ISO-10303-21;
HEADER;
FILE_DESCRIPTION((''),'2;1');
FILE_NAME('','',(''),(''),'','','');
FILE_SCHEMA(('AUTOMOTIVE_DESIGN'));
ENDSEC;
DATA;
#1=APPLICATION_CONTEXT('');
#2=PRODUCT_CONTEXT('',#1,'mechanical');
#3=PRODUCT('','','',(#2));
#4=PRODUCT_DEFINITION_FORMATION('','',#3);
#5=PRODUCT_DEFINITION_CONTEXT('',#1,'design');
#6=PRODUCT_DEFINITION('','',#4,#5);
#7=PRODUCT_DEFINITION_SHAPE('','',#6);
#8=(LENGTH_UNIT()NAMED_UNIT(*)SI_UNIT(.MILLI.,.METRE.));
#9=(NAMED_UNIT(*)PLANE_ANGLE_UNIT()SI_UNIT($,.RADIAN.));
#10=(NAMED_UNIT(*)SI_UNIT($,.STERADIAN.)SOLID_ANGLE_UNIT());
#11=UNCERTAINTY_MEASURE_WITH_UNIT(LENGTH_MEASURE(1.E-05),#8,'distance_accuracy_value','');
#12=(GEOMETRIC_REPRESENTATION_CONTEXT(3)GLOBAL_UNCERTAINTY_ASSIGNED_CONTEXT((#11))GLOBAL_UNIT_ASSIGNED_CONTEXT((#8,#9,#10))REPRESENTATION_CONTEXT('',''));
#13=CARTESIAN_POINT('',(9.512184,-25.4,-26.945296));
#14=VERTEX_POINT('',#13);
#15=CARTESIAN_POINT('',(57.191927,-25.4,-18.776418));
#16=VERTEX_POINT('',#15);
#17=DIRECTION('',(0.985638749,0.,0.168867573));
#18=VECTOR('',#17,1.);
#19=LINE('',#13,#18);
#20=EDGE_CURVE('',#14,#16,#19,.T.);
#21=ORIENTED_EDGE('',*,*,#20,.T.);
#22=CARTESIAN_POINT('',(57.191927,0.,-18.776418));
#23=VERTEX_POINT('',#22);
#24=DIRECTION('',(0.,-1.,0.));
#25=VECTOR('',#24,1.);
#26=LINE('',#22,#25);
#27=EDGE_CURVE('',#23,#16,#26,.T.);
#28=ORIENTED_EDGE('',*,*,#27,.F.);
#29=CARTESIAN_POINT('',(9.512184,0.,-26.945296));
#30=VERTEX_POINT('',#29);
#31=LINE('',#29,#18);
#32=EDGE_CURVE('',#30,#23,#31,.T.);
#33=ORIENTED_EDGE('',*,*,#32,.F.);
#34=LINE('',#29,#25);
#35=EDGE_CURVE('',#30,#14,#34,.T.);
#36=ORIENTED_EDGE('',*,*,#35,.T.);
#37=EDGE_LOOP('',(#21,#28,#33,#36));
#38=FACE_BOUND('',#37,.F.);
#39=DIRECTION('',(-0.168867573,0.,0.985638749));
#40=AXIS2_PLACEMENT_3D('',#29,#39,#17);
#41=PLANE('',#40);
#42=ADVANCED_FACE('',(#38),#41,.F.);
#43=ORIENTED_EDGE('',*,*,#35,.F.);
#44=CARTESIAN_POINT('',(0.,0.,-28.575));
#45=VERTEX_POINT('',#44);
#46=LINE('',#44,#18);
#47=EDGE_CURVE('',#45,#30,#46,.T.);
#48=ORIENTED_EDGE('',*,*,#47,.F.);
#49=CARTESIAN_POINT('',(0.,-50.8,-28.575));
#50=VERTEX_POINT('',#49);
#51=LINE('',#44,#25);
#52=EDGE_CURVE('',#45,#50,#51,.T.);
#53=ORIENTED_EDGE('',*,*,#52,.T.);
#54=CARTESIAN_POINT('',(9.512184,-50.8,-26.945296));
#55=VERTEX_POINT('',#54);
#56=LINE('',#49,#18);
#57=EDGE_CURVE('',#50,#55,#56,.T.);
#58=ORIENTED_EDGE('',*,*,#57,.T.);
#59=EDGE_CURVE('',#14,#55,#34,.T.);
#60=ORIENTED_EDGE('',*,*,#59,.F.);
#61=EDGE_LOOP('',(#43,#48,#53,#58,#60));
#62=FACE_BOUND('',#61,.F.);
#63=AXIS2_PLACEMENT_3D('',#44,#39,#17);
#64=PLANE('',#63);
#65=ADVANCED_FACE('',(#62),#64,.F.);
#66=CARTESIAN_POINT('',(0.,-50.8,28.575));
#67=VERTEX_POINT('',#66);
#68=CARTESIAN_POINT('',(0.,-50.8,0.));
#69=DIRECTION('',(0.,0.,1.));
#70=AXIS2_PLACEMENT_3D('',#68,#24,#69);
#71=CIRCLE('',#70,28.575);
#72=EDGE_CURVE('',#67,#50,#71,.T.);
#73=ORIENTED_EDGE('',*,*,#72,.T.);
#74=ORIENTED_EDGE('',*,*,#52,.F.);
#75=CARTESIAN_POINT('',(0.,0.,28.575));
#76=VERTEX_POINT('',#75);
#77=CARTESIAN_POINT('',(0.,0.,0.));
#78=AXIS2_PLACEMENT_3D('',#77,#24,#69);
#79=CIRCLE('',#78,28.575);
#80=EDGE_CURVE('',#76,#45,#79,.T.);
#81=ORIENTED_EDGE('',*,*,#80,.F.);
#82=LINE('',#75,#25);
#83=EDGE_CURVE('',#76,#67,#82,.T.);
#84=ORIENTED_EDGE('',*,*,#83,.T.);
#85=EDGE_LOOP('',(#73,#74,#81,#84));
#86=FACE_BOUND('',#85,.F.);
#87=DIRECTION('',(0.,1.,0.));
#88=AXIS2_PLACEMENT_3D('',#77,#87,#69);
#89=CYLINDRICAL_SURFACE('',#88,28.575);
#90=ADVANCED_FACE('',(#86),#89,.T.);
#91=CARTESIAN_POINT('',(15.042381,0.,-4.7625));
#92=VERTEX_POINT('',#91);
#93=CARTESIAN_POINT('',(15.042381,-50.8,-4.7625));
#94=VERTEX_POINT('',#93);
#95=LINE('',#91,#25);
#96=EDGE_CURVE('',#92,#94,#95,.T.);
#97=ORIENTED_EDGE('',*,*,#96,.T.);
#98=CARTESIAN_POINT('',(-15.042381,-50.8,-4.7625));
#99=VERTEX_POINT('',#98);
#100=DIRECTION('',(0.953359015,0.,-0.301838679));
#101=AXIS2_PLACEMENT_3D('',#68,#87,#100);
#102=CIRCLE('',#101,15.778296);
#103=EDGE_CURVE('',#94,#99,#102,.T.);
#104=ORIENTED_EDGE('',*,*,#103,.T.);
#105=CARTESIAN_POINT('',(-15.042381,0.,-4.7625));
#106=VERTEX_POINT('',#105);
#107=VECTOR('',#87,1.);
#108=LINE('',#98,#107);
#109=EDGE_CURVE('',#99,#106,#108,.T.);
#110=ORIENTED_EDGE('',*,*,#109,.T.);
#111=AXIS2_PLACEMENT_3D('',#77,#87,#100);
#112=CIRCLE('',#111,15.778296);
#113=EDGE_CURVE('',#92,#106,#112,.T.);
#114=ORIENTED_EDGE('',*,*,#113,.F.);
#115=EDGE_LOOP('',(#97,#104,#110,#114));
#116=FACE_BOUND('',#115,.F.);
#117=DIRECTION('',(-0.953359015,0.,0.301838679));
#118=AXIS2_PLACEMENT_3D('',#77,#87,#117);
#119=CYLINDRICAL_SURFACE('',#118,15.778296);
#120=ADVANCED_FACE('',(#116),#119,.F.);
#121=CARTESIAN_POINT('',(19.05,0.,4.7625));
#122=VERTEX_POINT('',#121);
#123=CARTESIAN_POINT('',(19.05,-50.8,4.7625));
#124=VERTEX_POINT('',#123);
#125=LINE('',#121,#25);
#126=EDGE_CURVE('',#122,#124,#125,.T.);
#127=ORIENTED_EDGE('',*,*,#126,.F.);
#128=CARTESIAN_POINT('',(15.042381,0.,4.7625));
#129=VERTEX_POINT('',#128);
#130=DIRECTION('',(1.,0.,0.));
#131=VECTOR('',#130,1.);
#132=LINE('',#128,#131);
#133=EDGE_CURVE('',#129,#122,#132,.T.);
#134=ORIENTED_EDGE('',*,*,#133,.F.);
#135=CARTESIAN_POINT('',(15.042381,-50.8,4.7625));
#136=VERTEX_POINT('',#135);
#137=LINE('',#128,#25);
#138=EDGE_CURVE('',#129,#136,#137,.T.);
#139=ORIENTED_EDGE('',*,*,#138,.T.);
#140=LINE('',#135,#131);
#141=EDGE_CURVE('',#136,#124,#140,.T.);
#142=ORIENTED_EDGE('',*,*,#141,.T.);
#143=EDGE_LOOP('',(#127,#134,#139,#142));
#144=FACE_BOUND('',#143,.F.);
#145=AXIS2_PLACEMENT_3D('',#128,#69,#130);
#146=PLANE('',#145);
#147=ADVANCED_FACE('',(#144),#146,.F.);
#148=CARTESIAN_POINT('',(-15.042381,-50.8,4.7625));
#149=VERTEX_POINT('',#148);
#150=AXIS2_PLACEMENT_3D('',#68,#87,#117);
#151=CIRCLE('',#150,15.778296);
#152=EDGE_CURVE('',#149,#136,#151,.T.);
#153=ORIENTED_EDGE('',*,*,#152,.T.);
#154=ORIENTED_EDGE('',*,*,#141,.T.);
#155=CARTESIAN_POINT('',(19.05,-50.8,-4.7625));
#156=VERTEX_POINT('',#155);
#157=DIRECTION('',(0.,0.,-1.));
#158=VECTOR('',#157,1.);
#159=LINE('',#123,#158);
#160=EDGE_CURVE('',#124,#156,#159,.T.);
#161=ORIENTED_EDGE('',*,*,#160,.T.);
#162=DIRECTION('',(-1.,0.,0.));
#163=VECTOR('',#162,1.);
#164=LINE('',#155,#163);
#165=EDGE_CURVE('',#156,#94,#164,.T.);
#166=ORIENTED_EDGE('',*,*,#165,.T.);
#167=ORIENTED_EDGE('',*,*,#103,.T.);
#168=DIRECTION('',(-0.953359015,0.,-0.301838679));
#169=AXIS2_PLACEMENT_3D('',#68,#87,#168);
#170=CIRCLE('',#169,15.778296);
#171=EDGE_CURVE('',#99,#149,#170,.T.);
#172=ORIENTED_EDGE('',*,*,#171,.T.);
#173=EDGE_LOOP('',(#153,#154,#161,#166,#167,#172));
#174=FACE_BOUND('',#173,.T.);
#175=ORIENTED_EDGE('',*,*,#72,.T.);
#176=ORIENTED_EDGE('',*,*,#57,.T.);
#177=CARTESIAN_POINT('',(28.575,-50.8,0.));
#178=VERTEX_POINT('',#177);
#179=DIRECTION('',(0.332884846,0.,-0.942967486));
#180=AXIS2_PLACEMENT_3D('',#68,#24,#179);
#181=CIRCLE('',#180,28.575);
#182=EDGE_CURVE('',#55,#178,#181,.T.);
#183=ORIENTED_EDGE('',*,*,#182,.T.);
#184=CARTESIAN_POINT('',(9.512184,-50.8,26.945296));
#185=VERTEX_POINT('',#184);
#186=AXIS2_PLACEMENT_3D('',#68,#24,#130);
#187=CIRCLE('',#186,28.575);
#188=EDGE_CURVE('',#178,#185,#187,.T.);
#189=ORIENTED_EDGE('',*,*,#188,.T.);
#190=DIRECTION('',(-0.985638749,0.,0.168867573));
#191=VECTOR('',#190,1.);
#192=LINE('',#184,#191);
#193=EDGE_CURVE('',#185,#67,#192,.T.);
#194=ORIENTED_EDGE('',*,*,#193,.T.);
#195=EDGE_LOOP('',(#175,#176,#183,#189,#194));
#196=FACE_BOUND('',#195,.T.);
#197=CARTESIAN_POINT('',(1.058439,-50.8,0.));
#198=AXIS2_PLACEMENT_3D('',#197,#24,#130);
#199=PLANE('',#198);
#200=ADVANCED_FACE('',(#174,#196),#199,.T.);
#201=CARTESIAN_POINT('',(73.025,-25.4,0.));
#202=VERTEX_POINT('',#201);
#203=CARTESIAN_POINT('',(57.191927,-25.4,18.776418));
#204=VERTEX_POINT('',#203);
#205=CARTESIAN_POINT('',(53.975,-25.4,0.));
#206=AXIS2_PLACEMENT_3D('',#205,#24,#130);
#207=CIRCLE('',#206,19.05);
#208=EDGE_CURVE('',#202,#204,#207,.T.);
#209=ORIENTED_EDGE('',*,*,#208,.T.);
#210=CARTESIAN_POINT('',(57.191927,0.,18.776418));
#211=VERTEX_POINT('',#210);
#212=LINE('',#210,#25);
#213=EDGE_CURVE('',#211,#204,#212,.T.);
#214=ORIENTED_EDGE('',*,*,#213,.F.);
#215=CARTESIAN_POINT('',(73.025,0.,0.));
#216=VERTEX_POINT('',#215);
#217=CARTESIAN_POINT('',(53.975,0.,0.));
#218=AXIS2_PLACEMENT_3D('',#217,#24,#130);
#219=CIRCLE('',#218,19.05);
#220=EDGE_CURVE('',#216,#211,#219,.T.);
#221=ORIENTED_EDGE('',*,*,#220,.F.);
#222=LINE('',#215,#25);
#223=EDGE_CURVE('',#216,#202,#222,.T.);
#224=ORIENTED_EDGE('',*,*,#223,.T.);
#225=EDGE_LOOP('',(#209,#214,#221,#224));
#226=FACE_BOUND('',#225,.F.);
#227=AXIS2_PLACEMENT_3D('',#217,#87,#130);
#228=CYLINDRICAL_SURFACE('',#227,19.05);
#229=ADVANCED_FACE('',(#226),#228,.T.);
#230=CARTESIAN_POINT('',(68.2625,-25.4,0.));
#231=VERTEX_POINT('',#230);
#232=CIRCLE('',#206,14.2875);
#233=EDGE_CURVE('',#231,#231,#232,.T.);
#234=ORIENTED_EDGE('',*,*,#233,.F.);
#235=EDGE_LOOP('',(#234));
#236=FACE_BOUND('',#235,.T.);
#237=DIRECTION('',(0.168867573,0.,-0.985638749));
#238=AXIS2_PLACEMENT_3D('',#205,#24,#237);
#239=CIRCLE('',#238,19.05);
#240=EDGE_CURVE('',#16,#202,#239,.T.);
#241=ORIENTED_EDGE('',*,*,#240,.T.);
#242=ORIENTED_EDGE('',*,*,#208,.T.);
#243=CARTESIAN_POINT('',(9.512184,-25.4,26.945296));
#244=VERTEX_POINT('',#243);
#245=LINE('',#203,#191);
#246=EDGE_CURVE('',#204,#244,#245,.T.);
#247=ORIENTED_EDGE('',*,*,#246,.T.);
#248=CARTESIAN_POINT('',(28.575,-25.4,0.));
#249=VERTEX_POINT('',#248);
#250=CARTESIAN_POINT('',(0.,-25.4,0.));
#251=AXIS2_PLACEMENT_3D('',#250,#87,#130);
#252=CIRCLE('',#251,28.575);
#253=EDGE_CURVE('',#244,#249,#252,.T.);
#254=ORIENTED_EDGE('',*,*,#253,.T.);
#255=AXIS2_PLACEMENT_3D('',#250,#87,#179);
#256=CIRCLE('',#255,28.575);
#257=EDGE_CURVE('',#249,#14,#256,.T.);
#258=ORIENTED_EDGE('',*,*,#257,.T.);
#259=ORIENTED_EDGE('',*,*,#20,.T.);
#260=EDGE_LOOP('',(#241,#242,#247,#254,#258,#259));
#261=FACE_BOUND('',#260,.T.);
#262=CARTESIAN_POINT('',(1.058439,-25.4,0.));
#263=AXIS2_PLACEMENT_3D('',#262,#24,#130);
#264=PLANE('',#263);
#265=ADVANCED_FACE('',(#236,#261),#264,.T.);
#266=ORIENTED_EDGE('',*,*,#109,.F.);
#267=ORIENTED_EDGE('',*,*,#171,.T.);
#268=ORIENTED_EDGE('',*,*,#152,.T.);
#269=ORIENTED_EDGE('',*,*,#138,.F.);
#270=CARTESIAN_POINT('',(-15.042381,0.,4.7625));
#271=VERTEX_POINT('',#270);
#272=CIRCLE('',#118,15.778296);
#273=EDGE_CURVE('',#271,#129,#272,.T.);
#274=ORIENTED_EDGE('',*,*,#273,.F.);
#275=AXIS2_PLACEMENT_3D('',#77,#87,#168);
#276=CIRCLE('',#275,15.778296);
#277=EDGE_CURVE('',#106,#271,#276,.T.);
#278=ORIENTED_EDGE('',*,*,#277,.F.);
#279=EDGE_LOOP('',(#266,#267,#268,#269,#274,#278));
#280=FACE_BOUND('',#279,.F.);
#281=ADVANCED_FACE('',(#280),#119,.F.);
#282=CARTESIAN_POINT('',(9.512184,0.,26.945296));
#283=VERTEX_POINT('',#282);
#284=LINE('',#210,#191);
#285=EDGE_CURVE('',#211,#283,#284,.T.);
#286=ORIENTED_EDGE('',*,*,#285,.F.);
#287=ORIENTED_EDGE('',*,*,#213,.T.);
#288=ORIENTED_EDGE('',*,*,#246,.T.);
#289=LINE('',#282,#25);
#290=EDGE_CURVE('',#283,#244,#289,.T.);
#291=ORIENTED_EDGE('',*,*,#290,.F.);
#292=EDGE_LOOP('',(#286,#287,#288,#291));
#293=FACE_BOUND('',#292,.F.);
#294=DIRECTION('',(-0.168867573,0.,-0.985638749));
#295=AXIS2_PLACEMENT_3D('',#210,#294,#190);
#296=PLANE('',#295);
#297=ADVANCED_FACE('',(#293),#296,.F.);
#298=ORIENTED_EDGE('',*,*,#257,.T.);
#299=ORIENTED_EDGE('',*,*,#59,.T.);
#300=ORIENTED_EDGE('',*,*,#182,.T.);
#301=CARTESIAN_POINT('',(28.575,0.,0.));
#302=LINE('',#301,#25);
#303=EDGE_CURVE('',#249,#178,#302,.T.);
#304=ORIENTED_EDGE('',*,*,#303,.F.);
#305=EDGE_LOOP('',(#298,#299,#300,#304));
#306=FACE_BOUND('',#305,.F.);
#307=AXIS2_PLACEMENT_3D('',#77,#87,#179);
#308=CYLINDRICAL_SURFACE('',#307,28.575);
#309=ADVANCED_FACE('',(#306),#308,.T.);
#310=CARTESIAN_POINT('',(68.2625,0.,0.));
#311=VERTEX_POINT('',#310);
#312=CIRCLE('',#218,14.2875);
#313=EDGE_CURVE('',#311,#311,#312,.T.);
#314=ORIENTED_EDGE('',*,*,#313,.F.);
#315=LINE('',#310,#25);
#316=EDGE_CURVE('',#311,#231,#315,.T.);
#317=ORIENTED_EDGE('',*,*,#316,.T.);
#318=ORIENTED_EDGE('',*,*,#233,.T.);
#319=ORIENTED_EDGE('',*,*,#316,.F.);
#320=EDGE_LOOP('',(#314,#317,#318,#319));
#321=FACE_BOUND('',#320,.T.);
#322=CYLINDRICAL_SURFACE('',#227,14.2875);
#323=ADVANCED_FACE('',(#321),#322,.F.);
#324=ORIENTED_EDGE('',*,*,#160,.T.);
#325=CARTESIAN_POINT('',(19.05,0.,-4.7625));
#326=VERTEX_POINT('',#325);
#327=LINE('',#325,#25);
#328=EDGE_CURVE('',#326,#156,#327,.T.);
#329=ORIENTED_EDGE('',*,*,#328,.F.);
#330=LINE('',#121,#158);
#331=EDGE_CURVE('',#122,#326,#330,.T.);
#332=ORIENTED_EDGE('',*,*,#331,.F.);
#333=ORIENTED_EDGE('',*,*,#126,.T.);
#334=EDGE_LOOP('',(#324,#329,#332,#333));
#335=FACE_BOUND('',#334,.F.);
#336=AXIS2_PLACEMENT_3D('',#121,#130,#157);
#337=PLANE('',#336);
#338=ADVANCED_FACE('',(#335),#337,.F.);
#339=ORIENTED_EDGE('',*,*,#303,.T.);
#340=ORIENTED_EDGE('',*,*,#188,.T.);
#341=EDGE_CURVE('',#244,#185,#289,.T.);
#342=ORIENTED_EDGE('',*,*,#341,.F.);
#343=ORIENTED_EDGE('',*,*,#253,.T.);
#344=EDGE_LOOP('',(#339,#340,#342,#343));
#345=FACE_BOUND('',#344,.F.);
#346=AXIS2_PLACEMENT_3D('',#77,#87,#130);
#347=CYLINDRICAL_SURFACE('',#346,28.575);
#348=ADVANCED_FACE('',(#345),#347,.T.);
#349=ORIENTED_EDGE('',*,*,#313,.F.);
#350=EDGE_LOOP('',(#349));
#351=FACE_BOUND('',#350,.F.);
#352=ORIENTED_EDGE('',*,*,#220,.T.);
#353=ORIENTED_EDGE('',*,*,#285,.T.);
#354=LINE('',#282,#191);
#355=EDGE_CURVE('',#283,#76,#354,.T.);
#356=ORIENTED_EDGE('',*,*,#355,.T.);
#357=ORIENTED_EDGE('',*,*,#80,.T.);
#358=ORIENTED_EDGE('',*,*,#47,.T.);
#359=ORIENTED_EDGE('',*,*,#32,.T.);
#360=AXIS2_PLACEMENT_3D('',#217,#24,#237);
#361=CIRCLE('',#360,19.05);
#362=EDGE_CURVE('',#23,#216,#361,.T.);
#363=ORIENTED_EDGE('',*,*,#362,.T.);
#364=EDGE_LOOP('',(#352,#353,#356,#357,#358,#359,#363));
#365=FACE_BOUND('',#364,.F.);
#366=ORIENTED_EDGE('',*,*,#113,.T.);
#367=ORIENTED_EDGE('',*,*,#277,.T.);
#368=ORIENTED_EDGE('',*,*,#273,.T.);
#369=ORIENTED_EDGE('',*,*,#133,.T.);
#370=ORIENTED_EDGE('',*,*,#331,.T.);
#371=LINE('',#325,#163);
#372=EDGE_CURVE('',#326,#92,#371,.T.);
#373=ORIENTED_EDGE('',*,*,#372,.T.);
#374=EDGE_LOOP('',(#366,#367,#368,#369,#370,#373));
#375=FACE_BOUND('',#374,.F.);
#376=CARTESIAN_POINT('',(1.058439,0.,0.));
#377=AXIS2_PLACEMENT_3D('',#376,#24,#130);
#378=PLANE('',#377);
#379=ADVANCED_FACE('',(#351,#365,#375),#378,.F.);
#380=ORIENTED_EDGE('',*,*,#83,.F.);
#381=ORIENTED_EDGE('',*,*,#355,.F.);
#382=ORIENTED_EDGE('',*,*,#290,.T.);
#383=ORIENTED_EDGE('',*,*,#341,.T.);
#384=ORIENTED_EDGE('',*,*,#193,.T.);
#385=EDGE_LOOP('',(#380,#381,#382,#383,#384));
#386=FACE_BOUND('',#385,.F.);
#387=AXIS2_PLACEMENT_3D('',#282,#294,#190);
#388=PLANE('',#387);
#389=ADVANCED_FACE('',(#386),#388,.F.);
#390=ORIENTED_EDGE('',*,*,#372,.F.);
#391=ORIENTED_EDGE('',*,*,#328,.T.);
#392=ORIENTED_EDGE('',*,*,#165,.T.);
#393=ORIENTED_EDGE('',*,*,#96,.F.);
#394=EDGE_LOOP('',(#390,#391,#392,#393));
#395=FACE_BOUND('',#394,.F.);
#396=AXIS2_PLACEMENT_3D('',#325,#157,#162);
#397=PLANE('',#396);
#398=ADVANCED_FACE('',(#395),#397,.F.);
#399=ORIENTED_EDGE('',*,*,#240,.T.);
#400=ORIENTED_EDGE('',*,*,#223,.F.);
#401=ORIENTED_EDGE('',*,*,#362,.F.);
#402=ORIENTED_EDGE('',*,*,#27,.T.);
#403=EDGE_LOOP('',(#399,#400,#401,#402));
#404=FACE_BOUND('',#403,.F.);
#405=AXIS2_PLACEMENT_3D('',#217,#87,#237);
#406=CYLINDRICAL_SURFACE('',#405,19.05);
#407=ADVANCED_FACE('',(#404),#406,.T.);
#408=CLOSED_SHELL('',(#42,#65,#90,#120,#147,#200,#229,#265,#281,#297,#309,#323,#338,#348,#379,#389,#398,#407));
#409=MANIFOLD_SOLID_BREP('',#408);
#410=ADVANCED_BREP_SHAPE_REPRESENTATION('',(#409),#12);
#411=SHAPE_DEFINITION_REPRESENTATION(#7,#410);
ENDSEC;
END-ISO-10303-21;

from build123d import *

# Parameters (mm, degrees)
F0_R     = 14.2875
F1_DEPTH = 25.4
F2_DEPTH = 50.8


with BuildPart() as f1:
    # F0 (on Front) → F1 (new body)
    with BuildSketch(Plane.XZ):
        with BuildLine():
            Line((9.5121844836, 26.9452959039), (0, 28.575))
            ThreePointArc((0, 28.575), (-28.575, 0), (0, -28.575))
            Line((0, -28.575), (9.5121844836, -26.9452959039))
            ThreePointArc((9.5121844836, -26.9452959039), (23.3274655355, -16.5033322905), (28.575, 0))
            ThreePointArc((28.575, 0), (23.3274655355, 16.5033322905), (9.5121844836, 26.9452959039))
        make_face()
        with BuildLine():
            ThreePointArc((-15.0423806475, 4.7625), (0, 15.778295909), (15.0423806475, 4.7625))
            Line((15.0423806475, 4.7625), (19.05, 4.7625))
            Line((19.05, 4.7625), (19.05, -4.7625))
            Line((19.05, -4.7625), (15.0423806475, -4.7625))
            ThreePointArc((15.0423806475, -4.7625), (0, -15.778295909), (-15.0423806475, -4.7625))
            Line((-15.0423806475, -4.7625), (-19.05, -4.7625))
            Line((-19.05, -4.7625), (-19.05, 4.7625))
            Line((-19.05, 4.7625), (-15.0423806475, 4.7625))
        make_face(mode=Mode.SUBTRACT)
        with BuildLine():
            Line((57.1919272622, 18.7764181619), (9.5121844836, 26.9452959039))
            ThreePointArc((9.5121844836, 26.9452959039), (23.3274655355, 16.5033322905), (28.575, 0))
            ThreePointArc((28.575, 0), (23.3274655355, -16.5033322905), (9.5121844836, -26.9452959039))
            Line((9.5121844836, -26.9452959039), (57.1919272622, -18.7764181619))
            ThreePointArc((57.1919272622, -18.7764181619), (34.925, 0), (57.1919272622, 18.7764181619))
        make_face()
        with BuildLine():
            ThreePointArc((73.025, 0), (68.5383952831, 12.2804730295), (57.1919272622, 18.7764181619))
            ThreePointArc((57.1919272622, 18.7764181619), (34.925, 0), (57.1919272622, -18.7764181619))
            ThreePointArc((57.1919272622, -18.7764181619), (68.5383952831, -12.2804730295), (73.025, 0))
        make_face()
        with Locations((53.975, 0)):
            Circle(F0_R, mode=Mode.SUBTRACT)
        with BuildLine():
            ThreePointArc((-15.0423806475, -4.7625), (-15.778295909, 0), (-15.0423806475, 4.7625))
            Line((-15.0423806475, 4.7625), (-19.05, 4.7625))
            Line((-19.05, 4.7625), (-19.05, -4.7625))
            Line((-19.05, -4.7625), (-15.0423806475, -4.7625))
        make_face()
    extrude(amount=F1_DEPTH)

    # F0 (on Front) → F2 (join)
    with BuildSketch(Plane.XZ):
        with BuildLine():
            Line((9.5121844836, 26.9452959039), (0, 28.575))
            ThreePointArc((0, 28.575), (-28.575, 0), (0, -28.575))
            Line((0, -28.575), (9.5121844836, -26.9452959039))
            ThreePointArc((9.5121844836, -26.9452959039), (23.3274655355, -16.5033322905), (28.575, 0))
            ThreePointArc((28.575, 0), (23.3274655355, 16.5033322905), (9.5121844836, 26.9452959039))
        make_face()
        with BuildLine():
            ThreePointArc((-15.0423806475, 4.7625), (0, 15.778295909), (15.0423806475, 4.7625))
            Line((15.0423806475, 4.7625), (19.05, 4.7625))
            Line((19.05, 4.7625), (19.05, -4.7625))
            Line((19.05, -4.7625), (15.0423806475, -4.7625))
            ThreePointArc((15.0423806475, -4.7625), (0, -15.778295909), (-15.0423806475, -4.7625))
            Line((-15.0423806475, -4.7625), (-19.05, -4.7625))
            Line((-19.05, -4.7625), (-19.05, 4.7625))
            Line((-19.05, 4.7625), (-15.0423806475, 4.7625))
        make_face(mode=Mode.SUBTRACT)
        with BuildLine():
            ThreePointArc((-15.0423806475, -4.7625), (-15.778295909, 0), (-15.0423806475, 4.7625))
            Line((-15.0423806475, 4.7625), (-19.05, 4.7625))
            Line((-19.05, 4.7625), (-19.05, -4.7625))
            Line((-19.05, -4.7625), (-15.0423806475, -4.7625))
        make_face()
    extrude(amount=F2_DEPTH)


solid = f1.part
